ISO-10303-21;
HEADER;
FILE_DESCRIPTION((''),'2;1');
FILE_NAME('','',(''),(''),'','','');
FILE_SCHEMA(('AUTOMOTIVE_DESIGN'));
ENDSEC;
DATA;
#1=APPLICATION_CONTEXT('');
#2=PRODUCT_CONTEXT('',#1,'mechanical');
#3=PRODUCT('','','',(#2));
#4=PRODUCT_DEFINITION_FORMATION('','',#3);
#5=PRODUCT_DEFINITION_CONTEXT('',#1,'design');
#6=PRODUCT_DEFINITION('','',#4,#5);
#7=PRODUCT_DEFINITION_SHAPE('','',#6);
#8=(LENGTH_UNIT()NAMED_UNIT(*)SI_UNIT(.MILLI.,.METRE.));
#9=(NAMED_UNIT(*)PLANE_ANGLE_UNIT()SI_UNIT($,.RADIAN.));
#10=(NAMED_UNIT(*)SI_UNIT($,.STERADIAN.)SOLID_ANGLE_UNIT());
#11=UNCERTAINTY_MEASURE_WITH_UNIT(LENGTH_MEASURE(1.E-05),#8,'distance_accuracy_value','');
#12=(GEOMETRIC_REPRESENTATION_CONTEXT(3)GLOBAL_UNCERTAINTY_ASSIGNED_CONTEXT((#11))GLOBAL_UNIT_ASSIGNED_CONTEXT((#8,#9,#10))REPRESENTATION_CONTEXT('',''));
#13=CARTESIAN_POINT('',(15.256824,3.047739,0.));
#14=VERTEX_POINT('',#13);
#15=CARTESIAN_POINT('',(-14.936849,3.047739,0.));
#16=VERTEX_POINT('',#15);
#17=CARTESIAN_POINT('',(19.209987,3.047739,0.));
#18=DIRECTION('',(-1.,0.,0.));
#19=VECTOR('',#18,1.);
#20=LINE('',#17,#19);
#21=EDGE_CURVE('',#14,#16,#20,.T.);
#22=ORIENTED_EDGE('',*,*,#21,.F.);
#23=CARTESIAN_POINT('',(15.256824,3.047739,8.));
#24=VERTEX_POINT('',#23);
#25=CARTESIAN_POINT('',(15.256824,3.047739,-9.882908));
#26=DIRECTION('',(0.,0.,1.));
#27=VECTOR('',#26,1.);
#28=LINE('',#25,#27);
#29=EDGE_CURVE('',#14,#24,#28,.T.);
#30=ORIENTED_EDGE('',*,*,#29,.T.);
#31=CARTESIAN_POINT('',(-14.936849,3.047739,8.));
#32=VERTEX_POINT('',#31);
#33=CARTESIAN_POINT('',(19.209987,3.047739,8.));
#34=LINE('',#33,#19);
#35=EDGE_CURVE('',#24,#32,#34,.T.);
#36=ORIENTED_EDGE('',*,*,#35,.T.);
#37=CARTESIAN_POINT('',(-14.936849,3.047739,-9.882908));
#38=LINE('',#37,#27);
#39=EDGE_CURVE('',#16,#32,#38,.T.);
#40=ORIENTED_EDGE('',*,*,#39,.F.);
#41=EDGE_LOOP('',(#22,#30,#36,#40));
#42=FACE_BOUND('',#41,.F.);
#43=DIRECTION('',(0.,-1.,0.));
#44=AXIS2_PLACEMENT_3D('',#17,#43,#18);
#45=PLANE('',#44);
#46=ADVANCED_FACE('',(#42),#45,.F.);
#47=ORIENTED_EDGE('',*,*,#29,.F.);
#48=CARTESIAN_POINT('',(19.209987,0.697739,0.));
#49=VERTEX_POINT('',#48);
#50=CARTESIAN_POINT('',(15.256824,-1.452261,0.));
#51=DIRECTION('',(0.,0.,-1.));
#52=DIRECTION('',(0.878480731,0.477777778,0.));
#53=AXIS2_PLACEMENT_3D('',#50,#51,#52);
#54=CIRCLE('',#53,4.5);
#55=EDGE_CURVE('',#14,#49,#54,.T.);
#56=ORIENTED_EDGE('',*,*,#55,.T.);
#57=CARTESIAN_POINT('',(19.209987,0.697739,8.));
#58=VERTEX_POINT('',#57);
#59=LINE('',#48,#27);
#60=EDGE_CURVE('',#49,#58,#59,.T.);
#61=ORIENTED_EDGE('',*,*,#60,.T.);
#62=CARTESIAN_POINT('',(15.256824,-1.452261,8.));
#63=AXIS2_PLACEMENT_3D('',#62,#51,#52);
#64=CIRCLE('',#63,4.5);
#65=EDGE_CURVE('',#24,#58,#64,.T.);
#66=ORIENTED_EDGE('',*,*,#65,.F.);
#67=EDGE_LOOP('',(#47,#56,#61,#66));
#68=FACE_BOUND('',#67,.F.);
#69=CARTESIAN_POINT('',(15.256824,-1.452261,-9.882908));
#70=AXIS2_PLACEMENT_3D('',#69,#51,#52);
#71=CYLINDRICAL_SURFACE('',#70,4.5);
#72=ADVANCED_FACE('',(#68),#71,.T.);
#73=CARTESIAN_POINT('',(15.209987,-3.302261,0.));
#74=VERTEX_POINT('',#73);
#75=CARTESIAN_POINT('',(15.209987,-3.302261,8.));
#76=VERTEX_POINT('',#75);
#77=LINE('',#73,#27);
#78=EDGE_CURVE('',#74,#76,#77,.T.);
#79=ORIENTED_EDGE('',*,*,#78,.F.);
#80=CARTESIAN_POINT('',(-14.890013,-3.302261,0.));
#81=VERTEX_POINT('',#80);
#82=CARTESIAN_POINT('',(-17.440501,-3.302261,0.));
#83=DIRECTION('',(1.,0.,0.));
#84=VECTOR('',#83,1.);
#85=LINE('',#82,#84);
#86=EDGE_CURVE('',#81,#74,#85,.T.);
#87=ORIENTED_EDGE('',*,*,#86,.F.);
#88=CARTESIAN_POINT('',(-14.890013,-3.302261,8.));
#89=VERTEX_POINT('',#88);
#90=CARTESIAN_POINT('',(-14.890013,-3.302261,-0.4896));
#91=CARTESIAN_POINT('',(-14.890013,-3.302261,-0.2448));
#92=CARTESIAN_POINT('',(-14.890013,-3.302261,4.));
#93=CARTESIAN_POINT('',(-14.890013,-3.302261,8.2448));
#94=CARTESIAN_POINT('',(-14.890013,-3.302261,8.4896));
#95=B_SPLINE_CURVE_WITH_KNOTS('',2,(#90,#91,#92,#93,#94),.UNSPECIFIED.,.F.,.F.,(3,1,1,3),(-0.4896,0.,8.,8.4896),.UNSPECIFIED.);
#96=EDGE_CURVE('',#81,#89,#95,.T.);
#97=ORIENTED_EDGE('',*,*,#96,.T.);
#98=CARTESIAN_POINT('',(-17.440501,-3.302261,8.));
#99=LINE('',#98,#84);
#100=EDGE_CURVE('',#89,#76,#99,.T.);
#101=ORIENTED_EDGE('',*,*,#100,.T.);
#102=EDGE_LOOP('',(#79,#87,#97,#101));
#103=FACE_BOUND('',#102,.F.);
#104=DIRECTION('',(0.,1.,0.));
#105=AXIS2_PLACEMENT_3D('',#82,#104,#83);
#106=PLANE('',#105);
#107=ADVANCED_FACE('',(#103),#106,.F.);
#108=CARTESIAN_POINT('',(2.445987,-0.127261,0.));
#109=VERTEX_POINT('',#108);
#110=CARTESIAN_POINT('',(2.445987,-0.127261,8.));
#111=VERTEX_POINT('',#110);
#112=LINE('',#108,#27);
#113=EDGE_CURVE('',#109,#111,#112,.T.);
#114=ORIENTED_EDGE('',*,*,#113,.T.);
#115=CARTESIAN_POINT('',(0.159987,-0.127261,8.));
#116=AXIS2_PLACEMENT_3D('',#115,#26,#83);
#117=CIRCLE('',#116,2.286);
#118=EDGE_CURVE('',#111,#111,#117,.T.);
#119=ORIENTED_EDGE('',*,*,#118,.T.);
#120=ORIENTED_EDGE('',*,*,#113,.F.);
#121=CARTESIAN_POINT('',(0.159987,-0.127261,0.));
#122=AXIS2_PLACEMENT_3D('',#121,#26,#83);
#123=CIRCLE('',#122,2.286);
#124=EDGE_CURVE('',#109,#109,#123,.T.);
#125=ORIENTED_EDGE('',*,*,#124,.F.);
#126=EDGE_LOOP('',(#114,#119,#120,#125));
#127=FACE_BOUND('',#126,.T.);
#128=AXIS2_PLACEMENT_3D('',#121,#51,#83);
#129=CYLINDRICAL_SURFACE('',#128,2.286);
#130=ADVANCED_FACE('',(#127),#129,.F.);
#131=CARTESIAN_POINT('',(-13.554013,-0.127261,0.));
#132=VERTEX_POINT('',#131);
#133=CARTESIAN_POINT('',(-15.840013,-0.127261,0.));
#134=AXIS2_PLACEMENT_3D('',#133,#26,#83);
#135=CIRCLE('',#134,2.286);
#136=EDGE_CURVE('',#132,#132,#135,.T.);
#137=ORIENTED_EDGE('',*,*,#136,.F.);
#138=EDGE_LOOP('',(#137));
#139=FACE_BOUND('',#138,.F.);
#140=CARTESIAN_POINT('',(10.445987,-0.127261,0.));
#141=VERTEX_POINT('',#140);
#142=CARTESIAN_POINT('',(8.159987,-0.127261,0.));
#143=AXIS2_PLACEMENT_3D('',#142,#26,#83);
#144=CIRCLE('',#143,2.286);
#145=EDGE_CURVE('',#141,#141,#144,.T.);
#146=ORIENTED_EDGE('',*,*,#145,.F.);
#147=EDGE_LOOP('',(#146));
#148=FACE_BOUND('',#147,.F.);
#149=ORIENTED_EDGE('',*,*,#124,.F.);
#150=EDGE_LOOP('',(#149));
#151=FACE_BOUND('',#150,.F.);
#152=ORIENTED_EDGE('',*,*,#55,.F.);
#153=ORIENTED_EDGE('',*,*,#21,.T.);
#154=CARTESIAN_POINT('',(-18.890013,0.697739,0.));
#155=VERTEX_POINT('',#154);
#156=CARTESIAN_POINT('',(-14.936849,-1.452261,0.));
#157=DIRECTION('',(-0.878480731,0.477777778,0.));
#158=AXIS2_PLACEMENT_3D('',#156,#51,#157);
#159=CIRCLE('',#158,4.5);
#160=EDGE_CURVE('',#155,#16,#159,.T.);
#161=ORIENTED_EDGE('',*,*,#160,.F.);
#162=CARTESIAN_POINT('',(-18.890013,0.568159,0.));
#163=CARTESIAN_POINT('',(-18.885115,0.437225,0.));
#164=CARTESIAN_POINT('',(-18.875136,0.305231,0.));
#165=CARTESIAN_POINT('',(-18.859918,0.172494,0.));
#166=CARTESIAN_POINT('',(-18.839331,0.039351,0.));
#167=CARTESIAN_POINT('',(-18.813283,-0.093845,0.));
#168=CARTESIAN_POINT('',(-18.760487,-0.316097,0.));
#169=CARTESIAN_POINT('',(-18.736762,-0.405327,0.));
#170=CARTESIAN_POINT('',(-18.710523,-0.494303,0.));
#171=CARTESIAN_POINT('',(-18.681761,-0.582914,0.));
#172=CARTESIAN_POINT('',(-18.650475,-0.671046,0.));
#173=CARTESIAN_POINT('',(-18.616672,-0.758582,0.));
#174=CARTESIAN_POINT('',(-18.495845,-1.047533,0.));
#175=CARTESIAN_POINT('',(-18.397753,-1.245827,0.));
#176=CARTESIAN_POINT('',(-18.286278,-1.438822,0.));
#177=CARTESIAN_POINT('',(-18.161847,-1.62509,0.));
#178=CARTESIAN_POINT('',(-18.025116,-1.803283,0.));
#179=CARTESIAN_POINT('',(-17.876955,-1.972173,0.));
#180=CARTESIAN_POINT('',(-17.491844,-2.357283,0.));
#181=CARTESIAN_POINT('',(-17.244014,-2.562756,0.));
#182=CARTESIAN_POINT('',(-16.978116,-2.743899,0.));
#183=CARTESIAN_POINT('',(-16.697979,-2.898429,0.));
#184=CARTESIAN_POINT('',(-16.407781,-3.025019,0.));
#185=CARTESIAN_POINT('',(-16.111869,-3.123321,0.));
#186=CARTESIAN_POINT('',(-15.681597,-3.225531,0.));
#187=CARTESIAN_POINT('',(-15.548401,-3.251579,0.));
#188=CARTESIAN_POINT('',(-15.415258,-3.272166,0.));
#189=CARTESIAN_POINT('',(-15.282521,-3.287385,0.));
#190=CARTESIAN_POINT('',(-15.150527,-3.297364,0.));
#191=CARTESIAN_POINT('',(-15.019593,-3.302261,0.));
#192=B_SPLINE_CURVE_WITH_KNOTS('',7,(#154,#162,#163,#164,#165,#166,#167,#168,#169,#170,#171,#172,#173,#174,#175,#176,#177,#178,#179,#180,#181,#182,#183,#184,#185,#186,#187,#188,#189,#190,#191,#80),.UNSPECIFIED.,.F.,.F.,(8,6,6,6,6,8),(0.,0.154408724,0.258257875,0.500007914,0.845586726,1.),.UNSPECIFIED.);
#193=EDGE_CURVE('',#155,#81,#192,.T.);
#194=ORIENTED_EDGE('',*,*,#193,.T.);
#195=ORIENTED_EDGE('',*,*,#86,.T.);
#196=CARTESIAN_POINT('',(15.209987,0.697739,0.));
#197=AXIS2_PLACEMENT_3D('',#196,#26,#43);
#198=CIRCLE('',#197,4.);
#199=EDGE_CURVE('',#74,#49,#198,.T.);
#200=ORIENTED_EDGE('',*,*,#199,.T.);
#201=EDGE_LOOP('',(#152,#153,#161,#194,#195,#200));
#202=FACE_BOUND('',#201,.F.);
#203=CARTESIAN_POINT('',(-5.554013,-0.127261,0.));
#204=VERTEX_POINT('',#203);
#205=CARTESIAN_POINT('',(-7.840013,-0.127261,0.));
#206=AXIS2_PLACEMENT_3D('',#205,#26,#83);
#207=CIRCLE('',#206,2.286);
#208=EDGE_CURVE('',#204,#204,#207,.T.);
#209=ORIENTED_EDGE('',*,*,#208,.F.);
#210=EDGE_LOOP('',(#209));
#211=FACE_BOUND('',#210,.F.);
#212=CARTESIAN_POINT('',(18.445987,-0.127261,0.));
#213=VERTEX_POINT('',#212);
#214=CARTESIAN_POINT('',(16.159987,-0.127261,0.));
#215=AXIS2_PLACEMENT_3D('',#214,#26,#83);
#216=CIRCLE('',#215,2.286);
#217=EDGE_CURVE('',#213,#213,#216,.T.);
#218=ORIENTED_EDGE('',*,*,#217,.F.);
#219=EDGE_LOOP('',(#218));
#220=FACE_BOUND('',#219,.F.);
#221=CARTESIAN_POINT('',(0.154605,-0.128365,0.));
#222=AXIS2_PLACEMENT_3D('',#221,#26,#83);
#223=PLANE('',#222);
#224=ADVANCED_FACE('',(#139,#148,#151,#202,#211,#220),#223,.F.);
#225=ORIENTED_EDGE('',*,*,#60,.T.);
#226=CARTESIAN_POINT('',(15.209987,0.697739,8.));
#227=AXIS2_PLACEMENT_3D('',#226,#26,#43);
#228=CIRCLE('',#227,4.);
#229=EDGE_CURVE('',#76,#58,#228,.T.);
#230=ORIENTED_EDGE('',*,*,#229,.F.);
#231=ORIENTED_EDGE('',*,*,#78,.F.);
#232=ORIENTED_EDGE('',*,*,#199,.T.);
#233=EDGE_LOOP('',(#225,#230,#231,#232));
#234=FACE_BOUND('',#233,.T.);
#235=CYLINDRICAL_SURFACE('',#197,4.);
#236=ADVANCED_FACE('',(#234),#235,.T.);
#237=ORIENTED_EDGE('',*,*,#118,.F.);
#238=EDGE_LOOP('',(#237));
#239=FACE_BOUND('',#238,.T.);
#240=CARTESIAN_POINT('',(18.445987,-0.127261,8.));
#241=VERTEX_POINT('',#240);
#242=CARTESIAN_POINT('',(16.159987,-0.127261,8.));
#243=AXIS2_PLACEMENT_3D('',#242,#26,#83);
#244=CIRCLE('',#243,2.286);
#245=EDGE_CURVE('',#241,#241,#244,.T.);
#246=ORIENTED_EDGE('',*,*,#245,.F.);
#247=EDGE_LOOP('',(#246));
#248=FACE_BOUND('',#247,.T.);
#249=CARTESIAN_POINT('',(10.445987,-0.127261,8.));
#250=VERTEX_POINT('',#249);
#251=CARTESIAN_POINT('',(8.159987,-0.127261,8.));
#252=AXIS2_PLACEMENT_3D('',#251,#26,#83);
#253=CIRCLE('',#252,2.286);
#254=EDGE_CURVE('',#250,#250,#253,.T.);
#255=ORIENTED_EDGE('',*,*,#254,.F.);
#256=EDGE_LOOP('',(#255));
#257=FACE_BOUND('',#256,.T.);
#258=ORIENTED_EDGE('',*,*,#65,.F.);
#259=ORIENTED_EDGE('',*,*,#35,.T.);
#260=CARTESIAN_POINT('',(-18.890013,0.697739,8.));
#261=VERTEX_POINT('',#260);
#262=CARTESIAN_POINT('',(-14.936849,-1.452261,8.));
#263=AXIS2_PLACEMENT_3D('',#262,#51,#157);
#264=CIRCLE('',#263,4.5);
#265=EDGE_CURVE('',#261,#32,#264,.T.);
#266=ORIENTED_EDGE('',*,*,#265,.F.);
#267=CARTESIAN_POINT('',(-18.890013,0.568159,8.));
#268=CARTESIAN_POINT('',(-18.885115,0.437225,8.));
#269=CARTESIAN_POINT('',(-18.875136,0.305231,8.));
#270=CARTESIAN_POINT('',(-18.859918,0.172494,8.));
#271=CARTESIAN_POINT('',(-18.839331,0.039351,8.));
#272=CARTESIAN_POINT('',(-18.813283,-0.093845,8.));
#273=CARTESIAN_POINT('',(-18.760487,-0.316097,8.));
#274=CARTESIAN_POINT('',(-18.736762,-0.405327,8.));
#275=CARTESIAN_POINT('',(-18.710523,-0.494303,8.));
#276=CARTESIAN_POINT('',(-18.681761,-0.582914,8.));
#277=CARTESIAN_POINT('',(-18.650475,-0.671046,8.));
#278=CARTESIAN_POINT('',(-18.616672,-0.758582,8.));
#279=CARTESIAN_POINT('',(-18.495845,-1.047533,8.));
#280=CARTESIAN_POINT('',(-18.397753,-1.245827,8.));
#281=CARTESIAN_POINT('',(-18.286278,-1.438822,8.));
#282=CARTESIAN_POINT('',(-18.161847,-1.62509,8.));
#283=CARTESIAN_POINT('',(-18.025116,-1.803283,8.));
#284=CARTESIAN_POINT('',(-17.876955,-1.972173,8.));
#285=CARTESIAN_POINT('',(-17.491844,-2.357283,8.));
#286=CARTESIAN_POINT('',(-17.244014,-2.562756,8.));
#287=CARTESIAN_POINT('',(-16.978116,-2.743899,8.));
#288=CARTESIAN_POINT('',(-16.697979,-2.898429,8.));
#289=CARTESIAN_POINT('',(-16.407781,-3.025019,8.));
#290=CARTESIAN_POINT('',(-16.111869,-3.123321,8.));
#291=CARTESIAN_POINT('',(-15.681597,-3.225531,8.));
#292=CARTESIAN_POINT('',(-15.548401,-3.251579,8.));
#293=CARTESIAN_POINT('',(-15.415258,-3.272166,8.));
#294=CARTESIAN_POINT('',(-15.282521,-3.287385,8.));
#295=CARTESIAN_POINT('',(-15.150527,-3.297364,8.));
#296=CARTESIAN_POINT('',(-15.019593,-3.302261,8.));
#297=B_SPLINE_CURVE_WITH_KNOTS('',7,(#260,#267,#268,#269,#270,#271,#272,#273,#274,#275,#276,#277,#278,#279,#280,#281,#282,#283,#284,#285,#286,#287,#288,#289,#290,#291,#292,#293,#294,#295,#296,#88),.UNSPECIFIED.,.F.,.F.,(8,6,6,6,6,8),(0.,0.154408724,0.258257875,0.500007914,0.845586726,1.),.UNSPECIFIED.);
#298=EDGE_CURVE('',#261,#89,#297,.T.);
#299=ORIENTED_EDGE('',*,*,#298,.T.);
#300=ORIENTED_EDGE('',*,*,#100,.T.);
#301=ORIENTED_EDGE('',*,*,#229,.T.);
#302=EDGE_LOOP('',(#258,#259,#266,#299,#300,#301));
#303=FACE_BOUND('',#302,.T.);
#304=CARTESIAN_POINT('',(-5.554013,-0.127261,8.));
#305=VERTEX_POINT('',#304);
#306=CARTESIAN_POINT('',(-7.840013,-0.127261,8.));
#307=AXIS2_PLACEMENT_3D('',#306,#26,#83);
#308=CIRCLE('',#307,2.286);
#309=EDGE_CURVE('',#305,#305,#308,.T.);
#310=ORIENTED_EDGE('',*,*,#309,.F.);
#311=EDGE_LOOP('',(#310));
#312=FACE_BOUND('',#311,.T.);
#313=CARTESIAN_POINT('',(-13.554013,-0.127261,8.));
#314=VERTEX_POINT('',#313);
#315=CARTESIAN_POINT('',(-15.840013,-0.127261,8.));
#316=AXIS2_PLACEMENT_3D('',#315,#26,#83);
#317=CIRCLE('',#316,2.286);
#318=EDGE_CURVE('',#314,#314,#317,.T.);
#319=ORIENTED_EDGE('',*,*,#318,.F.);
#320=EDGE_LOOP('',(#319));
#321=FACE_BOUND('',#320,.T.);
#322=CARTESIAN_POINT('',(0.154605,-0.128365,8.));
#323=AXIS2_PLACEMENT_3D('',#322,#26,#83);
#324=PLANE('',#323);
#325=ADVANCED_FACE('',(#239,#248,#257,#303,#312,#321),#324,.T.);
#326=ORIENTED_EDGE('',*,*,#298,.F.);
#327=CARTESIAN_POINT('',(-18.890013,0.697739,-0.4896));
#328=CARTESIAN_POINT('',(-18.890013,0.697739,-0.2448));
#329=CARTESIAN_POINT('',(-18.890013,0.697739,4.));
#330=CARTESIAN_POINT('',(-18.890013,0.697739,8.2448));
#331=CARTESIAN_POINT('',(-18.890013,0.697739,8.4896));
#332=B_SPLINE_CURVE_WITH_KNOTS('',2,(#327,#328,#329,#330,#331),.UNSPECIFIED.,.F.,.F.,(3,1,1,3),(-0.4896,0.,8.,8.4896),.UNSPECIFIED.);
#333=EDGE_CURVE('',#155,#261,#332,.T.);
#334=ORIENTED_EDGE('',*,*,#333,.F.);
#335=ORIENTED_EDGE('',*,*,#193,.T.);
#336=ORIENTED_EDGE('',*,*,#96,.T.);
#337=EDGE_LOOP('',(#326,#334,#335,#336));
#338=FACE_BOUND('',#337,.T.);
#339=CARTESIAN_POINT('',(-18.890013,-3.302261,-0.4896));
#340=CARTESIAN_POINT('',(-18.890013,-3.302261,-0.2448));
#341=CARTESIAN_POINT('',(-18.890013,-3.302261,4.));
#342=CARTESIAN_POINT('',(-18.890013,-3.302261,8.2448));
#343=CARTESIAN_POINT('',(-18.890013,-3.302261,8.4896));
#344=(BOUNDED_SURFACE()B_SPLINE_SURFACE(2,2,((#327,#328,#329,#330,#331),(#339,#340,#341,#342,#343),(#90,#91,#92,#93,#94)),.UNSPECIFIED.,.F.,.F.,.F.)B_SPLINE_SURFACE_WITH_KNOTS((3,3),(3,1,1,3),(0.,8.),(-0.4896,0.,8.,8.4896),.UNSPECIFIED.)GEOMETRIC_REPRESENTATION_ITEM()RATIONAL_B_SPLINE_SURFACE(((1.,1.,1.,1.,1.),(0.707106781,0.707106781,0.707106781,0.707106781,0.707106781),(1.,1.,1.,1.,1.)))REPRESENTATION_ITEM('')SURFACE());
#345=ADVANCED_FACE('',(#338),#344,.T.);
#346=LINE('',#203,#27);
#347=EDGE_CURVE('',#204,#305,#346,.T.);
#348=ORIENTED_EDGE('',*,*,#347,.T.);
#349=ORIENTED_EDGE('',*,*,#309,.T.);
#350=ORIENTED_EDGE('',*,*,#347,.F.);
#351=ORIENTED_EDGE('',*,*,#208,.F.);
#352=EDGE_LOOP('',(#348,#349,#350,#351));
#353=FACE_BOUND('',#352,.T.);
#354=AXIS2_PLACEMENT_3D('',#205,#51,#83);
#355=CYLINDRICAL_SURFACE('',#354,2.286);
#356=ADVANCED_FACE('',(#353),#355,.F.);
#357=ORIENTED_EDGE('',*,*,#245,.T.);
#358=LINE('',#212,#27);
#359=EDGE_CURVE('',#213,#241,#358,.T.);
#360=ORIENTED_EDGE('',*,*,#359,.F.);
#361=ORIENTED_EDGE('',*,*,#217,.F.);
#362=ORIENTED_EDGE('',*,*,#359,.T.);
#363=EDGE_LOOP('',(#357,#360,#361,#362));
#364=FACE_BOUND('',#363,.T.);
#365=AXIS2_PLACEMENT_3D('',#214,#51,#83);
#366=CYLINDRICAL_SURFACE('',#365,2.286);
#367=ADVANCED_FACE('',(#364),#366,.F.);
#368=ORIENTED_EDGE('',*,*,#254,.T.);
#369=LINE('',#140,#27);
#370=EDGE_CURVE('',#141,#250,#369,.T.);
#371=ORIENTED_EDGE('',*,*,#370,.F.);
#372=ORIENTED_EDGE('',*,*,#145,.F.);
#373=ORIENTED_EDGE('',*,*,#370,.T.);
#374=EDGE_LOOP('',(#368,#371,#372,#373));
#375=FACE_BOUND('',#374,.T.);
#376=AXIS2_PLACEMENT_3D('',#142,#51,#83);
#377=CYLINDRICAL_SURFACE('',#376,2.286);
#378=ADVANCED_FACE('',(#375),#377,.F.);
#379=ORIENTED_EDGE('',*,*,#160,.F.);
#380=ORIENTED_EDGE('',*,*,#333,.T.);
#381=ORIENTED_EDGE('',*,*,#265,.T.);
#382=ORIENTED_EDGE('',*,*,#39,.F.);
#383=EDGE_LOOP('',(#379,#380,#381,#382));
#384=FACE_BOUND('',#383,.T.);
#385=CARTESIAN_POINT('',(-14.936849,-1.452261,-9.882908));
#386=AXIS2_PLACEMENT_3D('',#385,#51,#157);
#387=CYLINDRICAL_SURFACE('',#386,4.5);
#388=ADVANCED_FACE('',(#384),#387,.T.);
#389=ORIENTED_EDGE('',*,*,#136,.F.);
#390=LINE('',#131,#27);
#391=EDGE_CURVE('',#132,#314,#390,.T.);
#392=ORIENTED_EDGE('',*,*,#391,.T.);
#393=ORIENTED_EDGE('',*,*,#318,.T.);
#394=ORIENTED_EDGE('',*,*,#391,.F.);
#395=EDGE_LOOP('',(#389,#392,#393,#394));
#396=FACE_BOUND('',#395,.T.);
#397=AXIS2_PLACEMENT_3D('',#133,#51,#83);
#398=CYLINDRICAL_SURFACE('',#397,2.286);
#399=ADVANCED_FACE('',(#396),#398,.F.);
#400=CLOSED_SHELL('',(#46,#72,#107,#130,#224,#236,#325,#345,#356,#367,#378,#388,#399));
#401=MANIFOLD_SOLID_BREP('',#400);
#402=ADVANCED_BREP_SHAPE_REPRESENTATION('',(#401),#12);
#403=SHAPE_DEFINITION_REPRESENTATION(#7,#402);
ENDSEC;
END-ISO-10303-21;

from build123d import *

# Parameters (mm, degrees)
F0_R        = 2.286
F1_DEPTH    = 8
F2_R        = 4
F3_R        = 4
F4_T1_DEPTH = 27.7658164516
F5_T1_DEPTH = 27.7658164516


# Not quite as in the source:
# - a fillet or chamfer that OpenCascade refuses, or shapes differently, is made with other operations: its cross-section is extruded or revolved along the edge and cut away or added


with BuildPart() as f1:
    # F0 (on Top) → F1 (new body)
    with BuildSketch(Plane.XY):
        Polygon((19.2099873261, 3.0477390712), (-18.8900126739, 3.0477390712), (-18.8900126739, -3.3271788533), (-17.4405010572, -3.3022609288), (19.2099873261, -3.3022609288), align=None)
        with Locations((-15.8400126739, -0.1272609288)):
            Circle(F0_R, mode=Mode.SUBTRACT)
        with Locations((-7.8400126739, -0.1272609288)):
            Circle(F0_R, mode=Mode.SUBTRACT)
        with Locations((0.1599873261, -0.1272609288)):
            Circle(F0_R, mode=Mode.SUBTRACT)
        with Locations((8.1599873261, -0.1272609288)):
            Circle(F0_R, mode=Mode.SUBTRACT)
        with Locations((16.1599873261, -0.1272609288)):
            Circle(F0_R, mode=Mode.SUBTRACT)
    extrude(amount=F1_DEPTH)

    # F2
    f2_edges = [f1.edges().sort_by_distance(p)[0] for p in [
        (-18.890013, -3.327179, 4),
    ]]
    fillet(f2_edges, radius=F2_R)

    # F3
    f3_edges = [f1.edges().sort_by_distance(p)[0] for p in [
        (19.209987, -3.302261, 4),
    ]]
    fillet(f3_edges, radius=F3_R)

    # F4: fillet of radius 4.5 on 1 edges, made by hand

    # F4_s2 → F4_t1 (cut)
    with BuildSketch(Plane.XY.offset(-9.8829082258)):
        with BuildLine():
            ThreePointArc((19.2099873261, 0.6977390712), (17.5562804933, 2.4158781586), (15.2568240358, 3.0477390712))
            Line((15.2568240358, 3.0477390712), (19.2099873261, 3.0477390712))
            Line((19.2099873261, 3.0477390712), (19.2099873261, 0.6977390712))
        make_face()
    extrude(amount=F4_T1_DEPTH, mode=Mode.SUBTRACT)

    # F5: fillet of radius 4.5 on 1 edges, made by hand

    # F5_s2 → F5_t1 (cut)
    with BuildSketch(Plane.XY.offset(-9.8829082258)):
        with BuildLine():
            ThreePointArc((-18.8900126739, 0.6977390712), (-17.2363058411, 2.4158781586), (-14.9368493836, 3.0477390712))
            Line((-14.9368493836, 3.0477390712), (-18.8900126739, 3.0477390712))
            Line((-18.8900126739, 3.0477390712), (-18.8900126739, 0.6977390712))
        make_face()
    extrude(amount=F5_T1_DEPTH, mode=Mode.SUBTRACT)


solid = f1.part
